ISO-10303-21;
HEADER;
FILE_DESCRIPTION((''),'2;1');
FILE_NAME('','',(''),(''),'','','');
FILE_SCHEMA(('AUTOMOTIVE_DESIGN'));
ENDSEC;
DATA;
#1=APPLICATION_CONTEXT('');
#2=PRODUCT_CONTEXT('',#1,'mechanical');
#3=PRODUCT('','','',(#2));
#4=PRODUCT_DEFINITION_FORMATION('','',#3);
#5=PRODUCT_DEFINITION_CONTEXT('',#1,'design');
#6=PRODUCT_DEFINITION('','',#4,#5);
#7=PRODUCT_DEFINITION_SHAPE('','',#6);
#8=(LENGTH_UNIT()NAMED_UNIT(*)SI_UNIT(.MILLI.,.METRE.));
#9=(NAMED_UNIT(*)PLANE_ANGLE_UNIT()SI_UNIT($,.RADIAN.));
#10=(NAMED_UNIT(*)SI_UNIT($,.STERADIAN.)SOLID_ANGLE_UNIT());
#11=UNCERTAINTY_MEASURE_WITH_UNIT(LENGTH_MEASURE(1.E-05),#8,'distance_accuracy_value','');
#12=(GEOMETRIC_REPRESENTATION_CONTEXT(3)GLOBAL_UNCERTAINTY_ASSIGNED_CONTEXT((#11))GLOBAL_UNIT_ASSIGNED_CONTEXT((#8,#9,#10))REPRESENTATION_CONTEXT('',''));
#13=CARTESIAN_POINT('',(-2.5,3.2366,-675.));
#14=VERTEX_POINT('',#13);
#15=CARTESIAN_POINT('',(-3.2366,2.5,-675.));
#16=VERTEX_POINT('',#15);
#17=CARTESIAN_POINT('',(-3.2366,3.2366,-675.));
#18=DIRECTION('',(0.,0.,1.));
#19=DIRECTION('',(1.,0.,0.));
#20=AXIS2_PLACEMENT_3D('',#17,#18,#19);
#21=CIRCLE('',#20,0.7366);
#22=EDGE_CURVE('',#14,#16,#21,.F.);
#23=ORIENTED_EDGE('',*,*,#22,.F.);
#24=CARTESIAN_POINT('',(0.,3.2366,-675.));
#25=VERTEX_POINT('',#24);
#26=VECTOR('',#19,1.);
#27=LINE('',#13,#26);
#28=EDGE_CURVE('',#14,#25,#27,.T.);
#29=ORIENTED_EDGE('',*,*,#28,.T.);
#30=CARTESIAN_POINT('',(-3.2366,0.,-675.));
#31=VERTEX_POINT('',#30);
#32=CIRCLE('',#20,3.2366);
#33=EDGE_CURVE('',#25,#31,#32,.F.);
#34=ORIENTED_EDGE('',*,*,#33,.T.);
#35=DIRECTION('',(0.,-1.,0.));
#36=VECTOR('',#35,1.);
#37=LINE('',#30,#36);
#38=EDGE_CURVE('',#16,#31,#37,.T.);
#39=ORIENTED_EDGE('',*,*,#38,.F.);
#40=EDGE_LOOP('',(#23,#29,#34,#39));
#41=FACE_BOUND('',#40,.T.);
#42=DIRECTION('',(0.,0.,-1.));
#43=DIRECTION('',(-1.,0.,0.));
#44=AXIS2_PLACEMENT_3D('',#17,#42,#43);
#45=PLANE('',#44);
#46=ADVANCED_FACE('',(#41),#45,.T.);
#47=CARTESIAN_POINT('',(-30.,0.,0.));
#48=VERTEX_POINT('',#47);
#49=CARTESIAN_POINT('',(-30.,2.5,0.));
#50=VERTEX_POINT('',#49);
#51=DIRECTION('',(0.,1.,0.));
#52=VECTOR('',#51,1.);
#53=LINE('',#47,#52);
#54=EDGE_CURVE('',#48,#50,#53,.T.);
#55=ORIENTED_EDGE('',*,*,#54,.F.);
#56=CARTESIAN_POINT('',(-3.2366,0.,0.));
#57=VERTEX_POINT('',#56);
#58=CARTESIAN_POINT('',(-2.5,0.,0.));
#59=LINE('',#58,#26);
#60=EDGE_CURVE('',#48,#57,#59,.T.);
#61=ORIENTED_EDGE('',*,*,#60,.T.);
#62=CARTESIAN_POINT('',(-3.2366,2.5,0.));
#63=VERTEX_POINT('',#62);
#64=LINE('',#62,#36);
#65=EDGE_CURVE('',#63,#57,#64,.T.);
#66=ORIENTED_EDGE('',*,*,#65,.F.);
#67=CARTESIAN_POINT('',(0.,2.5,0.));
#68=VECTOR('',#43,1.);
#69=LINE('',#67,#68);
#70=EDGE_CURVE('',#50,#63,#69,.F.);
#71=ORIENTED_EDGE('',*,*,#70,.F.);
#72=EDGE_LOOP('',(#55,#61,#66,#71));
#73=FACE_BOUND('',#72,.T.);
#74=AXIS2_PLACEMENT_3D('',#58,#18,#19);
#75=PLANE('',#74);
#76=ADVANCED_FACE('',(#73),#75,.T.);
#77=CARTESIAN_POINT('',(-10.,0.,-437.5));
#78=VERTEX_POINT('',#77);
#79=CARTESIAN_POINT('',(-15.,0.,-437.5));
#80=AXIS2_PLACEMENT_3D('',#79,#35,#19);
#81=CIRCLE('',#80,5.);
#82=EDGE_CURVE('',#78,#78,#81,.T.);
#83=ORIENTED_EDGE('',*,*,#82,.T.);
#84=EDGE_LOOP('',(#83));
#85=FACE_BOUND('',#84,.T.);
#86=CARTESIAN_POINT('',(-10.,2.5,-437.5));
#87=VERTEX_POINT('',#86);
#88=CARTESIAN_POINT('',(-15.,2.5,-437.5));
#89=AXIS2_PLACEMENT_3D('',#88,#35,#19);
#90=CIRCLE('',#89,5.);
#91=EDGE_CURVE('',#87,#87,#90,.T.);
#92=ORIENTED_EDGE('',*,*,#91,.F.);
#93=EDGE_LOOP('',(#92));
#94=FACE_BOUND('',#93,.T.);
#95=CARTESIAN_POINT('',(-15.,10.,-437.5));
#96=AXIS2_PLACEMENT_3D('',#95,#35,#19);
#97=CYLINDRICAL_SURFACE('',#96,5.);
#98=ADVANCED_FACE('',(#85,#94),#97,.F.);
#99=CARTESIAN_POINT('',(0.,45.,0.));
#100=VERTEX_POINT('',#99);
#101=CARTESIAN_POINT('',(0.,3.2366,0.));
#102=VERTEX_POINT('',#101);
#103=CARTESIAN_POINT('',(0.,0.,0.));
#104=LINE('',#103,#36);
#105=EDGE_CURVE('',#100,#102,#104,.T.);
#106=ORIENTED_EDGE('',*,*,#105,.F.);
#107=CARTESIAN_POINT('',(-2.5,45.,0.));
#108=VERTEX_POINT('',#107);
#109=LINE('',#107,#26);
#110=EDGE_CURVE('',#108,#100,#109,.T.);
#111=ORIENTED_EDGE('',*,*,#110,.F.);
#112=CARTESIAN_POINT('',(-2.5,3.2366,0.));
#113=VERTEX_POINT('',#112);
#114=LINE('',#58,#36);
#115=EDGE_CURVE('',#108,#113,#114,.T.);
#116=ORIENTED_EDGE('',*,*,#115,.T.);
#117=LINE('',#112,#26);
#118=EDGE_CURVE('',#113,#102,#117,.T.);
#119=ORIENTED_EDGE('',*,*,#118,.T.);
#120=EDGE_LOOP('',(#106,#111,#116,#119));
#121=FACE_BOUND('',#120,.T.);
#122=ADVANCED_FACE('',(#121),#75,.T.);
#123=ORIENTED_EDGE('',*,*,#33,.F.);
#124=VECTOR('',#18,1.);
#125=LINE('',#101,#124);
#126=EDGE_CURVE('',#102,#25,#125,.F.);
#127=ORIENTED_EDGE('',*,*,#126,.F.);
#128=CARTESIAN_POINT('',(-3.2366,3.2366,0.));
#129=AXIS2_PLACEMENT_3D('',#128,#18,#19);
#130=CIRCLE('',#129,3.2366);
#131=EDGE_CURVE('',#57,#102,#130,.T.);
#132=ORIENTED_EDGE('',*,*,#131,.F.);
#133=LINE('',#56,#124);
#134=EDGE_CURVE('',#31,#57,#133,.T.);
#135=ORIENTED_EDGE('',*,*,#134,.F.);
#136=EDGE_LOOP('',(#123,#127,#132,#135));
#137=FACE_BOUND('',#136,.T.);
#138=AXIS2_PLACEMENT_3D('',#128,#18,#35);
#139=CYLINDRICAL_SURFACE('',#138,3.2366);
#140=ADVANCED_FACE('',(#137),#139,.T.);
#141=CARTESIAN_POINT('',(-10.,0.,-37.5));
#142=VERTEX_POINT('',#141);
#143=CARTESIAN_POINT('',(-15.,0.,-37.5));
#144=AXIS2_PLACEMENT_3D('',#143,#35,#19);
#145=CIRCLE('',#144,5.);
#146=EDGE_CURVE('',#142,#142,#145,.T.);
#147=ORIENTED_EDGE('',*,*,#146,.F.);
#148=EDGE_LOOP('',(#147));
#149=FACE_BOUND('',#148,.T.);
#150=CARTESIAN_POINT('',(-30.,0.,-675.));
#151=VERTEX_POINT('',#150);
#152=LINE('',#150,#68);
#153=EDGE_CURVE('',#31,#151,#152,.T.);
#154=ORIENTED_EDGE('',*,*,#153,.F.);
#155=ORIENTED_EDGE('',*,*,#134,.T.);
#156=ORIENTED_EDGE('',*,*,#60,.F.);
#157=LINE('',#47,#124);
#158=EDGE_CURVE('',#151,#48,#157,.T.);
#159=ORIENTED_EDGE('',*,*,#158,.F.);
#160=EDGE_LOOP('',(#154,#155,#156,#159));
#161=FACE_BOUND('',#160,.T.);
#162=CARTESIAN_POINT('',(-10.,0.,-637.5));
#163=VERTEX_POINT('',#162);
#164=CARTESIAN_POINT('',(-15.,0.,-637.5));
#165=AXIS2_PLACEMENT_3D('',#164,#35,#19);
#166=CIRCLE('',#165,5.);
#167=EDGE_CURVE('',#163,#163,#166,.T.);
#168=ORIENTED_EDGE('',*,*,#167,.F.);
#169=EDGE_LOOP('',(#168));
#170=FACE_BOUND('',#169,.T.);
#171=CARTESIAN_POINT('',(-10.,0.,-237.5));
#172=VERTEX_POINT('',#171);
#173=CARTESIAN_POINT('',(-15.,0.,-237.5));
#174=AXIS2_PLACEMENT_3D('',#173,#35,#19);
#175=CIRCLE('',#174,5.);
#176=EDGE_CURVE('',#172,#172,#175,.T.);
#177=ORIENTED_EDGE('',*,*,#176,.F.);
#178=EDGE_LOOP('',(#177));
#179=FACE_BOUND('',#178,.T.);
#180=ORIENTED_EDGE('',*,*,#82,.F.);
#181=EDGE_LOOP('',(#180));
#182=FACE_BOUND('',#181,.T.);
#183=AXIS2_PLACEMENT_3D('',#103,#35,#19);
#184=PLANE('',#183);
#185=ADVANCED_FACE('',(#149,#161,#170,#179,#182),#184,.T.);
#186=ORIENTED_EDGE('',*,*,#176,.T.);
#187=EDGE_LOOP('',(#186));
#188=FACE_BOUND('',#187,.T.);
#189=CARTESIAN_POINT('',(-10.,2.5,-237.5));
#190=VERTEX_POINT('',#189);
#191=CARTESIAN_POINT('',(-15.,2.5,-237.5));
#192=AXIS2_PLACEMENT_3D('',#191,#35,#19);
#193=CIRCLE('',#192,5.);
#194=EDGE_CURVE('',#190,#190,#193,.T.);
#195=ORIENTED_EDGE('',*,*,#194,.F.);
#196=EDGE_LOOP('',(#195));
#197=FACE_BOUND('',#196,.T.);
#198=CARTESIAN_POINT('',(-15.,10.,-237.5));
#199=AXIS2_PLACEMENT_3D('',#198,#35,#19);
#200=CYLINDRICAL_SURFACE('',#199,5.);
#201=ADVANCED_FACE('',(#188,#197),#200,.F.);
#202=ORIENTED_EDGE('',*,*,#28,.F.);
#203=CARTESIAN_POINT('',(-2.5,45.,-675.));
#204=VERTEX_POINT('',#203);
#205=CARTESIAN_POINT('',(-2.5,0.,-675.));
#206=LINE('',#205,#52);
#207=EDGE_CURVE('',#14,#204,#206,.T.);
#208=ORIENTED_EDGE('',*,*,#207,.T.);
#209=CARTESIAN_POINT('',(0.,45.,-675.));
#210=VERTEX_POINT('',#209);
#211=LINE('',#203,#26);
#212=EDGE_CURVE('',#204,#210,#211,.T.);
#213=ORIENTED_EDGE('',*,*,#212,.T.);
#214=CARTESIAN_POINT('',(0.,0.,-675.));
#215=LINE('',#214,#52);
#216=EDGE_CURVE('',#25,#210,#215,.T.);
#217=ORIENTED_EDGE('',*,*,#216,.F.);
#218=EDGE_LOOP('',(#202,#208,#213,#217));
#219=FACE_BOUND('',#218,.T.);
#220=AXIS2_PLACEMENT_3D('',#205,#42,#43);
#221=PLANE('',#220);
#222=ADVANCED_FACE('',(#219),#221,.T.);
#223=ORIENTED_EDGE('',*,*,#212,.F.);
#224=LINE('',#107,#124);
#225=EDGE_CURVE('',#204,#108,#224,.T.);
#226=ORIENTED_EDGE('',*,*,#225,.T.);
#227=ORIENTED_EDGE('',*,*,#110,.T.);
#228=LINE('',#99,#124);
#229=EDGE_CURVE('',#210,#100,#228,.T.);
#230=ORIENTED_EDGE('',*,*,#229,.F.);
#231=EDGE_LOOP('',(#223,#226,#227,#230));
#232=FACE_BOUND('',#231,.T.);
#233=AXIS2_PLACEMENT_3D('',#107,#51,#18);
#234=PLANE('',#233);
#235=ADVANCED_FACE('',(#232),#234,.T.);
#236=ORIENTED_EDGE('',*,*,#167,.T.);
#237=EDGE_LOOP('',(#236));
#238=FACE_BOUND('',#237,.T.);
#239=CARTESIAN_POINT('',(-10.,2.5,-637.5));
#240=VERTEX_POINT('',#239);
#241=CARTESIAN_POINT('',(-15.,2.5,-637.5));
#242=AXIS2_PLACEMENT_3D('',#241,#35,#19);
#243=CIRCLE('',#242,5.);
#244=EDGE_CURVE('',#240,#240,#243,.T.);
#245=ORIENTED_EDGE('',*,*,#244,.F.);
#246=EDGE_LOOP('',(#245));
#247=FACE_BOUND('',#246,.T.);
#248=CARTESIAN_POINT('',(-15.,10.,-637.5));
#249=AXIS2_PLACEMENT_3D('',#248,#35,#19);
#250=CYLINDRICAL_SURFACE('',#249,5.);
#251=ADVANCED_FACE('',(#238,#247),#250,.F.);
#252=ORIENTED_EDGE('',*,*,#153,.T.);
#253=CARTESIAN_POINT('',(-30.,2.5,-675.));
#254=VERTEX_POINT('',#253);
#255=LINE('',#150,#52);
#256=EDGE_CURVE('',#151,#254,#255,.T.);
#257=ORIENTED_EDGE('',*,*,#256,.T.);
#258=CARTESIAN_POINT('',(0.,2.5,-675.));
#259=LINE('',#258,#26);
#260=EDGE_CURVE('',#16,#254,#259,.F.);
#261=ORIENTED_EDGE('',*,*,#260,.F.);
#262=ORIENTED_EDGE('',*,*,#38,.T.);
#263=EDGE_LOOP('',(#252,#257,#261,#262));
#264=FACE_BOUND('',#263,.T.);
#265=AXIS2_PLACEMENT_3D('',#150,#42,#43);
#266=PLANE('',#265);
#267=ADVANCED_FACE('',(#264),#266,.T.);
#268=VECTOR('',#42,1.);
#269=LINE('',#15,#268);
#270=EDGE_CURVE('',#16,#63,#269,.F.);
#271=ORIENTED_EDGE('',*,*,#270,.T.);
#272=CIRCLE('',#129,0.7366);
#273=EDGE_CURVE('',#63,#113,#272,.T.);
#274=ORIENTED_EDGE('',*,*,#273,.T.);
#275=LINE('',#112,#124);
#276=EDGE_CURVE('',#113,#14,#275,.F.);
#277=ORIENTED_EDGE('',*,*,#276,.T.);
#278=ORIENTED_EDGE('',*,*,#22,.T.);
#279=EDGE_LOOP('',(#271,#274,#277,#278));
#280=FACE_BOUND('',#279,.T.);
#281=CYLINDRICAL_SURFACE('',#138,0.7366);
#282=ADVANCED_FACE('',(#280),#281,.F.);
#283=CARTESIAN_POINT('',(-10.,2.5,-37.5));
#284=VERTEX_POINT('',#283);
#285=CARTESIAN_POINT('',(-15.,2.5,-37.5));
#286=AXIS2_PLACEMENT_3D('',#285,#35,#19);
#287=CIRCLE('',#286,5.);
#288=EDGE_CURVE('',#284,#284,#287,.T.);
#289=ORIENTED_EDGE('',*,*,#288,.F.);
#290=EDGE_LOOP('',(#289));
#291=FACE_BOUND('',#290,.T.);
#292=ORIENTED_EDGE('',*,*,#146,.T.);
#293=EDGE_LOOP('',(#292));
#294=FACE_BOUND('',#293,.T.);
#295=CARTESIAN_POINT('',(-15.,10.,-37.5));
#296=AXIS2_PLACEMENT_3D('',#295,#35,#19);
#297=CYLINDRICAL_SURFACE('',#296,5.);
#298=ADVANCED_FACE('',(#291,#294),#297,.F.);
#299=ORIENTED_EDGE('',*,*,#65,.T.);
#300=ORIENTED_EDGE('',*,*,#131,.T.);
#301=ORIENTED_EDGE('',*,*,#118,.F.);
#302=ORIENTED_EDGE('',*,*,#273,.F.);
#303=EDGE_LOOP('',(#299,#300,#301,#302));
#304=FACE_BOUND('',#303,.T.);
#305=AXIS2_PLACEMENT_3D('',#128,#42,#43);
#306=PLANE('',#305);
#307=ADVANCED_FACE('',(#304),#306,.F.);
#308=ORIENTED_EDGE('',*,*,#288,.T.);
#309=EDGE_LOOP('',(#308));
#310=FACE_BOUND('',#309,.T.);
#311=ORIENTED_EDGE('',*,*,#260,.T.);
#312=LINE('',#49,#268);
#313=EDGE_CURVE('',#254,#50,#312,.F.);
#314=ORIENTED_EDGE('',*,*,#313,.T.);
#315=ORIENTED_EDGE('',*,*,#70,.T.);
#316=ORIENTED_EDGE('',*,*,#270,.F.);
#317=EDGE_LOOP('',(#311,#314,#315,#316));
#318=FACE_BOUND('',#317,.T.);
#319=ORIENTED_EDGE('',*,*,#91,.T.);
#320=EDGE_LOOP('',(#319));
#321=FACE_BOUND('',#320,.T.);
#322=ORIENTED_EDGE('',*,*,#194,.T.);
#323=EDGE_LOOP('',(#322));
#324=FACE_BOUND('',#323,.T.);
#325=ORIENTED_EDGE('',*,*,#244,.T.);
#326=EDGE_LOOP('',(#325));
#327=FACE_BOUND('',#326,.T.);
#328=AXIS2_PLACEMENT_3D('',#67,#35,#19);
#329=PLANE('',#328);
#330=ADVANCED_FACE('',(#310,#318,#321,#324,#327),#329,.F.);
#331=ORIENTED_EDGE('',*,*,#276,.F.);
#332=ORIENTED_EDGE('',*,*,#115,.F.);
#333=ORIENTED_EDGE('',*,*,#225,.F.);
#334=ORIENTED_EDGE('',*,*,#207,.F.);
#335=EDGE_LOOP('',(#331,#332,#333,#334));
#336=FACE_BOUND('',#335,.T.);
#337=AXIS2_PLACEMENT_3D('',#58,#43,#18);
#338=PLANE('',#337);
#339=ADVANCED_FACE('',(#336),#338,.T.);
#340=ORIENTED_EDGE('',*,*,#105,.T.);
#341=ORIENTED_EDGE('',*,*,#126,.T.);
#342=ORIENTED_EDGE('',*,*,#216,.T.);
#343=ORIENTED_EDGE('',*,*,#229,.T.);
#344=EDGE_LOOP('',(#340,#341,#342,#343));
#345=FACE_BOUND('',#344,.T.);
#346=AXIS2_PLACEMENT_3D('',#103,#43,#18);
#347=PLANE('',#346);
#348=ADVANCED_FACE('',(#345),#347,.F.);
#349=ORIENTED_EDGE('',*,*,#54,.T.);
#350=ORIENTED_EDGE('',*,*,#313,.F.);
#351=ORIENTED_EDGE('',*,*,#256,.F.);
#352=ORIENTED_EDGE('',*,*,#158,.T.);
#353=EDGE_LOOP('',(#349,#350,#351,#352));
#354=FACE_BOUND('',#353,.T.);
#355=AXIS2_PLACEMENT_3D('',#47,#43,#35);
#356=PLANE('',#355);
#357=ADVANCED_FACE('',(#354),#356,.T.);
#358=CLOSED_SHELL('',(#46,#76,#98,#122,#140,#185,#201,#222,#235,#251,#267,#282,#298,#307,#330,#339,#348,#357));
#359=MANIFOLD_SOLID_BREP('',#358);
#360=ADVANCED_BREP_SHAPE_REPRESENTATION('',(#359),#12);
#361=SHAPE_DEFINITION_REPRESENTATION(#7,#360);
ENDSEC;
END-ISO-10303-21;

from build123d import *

# Parameters (mm, degrees)
SKETCH1_W                    = 675
SKETCH1_H                    = 45
BASE_FLANGE1_DEPTH           = 2.5
EDGE_FLANGE1_STRIP_W         = 11.4732
EDGE_FLANGE1_STRIP_H         = 2.5
EDGE_FLANGE1_STRIP_CUT_DEPTH = 675
EDGE_FLANGE1_DEPTH           = 675
SKETCH9_R                    = 5
CUT_EXTRUDE1_DEPTH           = 10
LPATTERN1_COUNT              = 4
LPATTERN1_PITCH              = 200


# Sheet-metal steps are written as plain solids
with BuildPart() as part:
    # Sketch1 → Base-Flange1 (new body)
    with BuildSketch(Plane(origin=(0, 0, 0), x_dir=(0, 0, -1), z_dir=(1, 0, 0))):
        with Locations((337.5, 22.5)):
            Rectangle(SKETCH1_W, SKETCH1_H)
    extrude(amount=-BASE_FLANGE1_DEPTH)

    # Edge-Flange1 strip (across the edge) → Edge-Flange1 strip cut (cut)
    with BuildSketch(Plane(origin=(-2.5, 0, -675), x_dir=(0, 1, 0), z_dir=(0, 0, 1))):
        with Locations((-2.5, -1.25)):
            Rectangle(EDGE_FLANGE1_STRIP_W, EDGE_FLANGE1_STRIP_H)
    extrude(amount=EDGE_FLANGE1_STRIP_CUT_DEPTH, mode=Mode.SUBTRACT)

    # Edge-Flange1 section (across the edge) → Edge-Flange1 (add)
    with BuildSketch(Plane(origin=(-2.5, 0, -675), x_dir=(0, 1, 0), z_dir=(0, 0, 1))):
        with BuildLine():
            Line((0, 0.7366), (0, 27.5))
            Line((0, 27.5), (2.5, 27.5))
            Line((2.5, 27.5), (2.5, 0.7366))
            ThreePointArc((2.5, 0.7366), (2.715745145, 0.215745145), (3.2366, 0))
            Line((3.2366, 0), (3.2366, -2.5))
            ThreePointArc((3.2366, -2.5), (0.947978192, -1.552021808), (0, 0.7366))
        make_face()
    extrude(amount=EDGE_FLANGE1_DEPTH)

    # Sketch9 → Cut-Extrude1 (cut)
    with BuildSketch(Plane(origin=(0, 0, 0), x_dir=(-1, 0, 0), z_dir=(0, -1, 0))):
        with Locations(Location((15, 637.5, 0), (0, 0, 180))):
            Circle(SKETCH9_R)
    cut_extrude1 = extrude(amount=-CUT_EXTRUDE1_DEPTH, mode=Mode.SUBTRACT)

    # LPattern1: Cut-Extrude1 ×4
    with Locations(*[(0, 0, i * LPATTERN1_PITCH) for i in range(1, LPATTERN1_COUNT)]):
        add(cut_extrude1, mode=Mode.SUBTRACT)


solid = part.part
